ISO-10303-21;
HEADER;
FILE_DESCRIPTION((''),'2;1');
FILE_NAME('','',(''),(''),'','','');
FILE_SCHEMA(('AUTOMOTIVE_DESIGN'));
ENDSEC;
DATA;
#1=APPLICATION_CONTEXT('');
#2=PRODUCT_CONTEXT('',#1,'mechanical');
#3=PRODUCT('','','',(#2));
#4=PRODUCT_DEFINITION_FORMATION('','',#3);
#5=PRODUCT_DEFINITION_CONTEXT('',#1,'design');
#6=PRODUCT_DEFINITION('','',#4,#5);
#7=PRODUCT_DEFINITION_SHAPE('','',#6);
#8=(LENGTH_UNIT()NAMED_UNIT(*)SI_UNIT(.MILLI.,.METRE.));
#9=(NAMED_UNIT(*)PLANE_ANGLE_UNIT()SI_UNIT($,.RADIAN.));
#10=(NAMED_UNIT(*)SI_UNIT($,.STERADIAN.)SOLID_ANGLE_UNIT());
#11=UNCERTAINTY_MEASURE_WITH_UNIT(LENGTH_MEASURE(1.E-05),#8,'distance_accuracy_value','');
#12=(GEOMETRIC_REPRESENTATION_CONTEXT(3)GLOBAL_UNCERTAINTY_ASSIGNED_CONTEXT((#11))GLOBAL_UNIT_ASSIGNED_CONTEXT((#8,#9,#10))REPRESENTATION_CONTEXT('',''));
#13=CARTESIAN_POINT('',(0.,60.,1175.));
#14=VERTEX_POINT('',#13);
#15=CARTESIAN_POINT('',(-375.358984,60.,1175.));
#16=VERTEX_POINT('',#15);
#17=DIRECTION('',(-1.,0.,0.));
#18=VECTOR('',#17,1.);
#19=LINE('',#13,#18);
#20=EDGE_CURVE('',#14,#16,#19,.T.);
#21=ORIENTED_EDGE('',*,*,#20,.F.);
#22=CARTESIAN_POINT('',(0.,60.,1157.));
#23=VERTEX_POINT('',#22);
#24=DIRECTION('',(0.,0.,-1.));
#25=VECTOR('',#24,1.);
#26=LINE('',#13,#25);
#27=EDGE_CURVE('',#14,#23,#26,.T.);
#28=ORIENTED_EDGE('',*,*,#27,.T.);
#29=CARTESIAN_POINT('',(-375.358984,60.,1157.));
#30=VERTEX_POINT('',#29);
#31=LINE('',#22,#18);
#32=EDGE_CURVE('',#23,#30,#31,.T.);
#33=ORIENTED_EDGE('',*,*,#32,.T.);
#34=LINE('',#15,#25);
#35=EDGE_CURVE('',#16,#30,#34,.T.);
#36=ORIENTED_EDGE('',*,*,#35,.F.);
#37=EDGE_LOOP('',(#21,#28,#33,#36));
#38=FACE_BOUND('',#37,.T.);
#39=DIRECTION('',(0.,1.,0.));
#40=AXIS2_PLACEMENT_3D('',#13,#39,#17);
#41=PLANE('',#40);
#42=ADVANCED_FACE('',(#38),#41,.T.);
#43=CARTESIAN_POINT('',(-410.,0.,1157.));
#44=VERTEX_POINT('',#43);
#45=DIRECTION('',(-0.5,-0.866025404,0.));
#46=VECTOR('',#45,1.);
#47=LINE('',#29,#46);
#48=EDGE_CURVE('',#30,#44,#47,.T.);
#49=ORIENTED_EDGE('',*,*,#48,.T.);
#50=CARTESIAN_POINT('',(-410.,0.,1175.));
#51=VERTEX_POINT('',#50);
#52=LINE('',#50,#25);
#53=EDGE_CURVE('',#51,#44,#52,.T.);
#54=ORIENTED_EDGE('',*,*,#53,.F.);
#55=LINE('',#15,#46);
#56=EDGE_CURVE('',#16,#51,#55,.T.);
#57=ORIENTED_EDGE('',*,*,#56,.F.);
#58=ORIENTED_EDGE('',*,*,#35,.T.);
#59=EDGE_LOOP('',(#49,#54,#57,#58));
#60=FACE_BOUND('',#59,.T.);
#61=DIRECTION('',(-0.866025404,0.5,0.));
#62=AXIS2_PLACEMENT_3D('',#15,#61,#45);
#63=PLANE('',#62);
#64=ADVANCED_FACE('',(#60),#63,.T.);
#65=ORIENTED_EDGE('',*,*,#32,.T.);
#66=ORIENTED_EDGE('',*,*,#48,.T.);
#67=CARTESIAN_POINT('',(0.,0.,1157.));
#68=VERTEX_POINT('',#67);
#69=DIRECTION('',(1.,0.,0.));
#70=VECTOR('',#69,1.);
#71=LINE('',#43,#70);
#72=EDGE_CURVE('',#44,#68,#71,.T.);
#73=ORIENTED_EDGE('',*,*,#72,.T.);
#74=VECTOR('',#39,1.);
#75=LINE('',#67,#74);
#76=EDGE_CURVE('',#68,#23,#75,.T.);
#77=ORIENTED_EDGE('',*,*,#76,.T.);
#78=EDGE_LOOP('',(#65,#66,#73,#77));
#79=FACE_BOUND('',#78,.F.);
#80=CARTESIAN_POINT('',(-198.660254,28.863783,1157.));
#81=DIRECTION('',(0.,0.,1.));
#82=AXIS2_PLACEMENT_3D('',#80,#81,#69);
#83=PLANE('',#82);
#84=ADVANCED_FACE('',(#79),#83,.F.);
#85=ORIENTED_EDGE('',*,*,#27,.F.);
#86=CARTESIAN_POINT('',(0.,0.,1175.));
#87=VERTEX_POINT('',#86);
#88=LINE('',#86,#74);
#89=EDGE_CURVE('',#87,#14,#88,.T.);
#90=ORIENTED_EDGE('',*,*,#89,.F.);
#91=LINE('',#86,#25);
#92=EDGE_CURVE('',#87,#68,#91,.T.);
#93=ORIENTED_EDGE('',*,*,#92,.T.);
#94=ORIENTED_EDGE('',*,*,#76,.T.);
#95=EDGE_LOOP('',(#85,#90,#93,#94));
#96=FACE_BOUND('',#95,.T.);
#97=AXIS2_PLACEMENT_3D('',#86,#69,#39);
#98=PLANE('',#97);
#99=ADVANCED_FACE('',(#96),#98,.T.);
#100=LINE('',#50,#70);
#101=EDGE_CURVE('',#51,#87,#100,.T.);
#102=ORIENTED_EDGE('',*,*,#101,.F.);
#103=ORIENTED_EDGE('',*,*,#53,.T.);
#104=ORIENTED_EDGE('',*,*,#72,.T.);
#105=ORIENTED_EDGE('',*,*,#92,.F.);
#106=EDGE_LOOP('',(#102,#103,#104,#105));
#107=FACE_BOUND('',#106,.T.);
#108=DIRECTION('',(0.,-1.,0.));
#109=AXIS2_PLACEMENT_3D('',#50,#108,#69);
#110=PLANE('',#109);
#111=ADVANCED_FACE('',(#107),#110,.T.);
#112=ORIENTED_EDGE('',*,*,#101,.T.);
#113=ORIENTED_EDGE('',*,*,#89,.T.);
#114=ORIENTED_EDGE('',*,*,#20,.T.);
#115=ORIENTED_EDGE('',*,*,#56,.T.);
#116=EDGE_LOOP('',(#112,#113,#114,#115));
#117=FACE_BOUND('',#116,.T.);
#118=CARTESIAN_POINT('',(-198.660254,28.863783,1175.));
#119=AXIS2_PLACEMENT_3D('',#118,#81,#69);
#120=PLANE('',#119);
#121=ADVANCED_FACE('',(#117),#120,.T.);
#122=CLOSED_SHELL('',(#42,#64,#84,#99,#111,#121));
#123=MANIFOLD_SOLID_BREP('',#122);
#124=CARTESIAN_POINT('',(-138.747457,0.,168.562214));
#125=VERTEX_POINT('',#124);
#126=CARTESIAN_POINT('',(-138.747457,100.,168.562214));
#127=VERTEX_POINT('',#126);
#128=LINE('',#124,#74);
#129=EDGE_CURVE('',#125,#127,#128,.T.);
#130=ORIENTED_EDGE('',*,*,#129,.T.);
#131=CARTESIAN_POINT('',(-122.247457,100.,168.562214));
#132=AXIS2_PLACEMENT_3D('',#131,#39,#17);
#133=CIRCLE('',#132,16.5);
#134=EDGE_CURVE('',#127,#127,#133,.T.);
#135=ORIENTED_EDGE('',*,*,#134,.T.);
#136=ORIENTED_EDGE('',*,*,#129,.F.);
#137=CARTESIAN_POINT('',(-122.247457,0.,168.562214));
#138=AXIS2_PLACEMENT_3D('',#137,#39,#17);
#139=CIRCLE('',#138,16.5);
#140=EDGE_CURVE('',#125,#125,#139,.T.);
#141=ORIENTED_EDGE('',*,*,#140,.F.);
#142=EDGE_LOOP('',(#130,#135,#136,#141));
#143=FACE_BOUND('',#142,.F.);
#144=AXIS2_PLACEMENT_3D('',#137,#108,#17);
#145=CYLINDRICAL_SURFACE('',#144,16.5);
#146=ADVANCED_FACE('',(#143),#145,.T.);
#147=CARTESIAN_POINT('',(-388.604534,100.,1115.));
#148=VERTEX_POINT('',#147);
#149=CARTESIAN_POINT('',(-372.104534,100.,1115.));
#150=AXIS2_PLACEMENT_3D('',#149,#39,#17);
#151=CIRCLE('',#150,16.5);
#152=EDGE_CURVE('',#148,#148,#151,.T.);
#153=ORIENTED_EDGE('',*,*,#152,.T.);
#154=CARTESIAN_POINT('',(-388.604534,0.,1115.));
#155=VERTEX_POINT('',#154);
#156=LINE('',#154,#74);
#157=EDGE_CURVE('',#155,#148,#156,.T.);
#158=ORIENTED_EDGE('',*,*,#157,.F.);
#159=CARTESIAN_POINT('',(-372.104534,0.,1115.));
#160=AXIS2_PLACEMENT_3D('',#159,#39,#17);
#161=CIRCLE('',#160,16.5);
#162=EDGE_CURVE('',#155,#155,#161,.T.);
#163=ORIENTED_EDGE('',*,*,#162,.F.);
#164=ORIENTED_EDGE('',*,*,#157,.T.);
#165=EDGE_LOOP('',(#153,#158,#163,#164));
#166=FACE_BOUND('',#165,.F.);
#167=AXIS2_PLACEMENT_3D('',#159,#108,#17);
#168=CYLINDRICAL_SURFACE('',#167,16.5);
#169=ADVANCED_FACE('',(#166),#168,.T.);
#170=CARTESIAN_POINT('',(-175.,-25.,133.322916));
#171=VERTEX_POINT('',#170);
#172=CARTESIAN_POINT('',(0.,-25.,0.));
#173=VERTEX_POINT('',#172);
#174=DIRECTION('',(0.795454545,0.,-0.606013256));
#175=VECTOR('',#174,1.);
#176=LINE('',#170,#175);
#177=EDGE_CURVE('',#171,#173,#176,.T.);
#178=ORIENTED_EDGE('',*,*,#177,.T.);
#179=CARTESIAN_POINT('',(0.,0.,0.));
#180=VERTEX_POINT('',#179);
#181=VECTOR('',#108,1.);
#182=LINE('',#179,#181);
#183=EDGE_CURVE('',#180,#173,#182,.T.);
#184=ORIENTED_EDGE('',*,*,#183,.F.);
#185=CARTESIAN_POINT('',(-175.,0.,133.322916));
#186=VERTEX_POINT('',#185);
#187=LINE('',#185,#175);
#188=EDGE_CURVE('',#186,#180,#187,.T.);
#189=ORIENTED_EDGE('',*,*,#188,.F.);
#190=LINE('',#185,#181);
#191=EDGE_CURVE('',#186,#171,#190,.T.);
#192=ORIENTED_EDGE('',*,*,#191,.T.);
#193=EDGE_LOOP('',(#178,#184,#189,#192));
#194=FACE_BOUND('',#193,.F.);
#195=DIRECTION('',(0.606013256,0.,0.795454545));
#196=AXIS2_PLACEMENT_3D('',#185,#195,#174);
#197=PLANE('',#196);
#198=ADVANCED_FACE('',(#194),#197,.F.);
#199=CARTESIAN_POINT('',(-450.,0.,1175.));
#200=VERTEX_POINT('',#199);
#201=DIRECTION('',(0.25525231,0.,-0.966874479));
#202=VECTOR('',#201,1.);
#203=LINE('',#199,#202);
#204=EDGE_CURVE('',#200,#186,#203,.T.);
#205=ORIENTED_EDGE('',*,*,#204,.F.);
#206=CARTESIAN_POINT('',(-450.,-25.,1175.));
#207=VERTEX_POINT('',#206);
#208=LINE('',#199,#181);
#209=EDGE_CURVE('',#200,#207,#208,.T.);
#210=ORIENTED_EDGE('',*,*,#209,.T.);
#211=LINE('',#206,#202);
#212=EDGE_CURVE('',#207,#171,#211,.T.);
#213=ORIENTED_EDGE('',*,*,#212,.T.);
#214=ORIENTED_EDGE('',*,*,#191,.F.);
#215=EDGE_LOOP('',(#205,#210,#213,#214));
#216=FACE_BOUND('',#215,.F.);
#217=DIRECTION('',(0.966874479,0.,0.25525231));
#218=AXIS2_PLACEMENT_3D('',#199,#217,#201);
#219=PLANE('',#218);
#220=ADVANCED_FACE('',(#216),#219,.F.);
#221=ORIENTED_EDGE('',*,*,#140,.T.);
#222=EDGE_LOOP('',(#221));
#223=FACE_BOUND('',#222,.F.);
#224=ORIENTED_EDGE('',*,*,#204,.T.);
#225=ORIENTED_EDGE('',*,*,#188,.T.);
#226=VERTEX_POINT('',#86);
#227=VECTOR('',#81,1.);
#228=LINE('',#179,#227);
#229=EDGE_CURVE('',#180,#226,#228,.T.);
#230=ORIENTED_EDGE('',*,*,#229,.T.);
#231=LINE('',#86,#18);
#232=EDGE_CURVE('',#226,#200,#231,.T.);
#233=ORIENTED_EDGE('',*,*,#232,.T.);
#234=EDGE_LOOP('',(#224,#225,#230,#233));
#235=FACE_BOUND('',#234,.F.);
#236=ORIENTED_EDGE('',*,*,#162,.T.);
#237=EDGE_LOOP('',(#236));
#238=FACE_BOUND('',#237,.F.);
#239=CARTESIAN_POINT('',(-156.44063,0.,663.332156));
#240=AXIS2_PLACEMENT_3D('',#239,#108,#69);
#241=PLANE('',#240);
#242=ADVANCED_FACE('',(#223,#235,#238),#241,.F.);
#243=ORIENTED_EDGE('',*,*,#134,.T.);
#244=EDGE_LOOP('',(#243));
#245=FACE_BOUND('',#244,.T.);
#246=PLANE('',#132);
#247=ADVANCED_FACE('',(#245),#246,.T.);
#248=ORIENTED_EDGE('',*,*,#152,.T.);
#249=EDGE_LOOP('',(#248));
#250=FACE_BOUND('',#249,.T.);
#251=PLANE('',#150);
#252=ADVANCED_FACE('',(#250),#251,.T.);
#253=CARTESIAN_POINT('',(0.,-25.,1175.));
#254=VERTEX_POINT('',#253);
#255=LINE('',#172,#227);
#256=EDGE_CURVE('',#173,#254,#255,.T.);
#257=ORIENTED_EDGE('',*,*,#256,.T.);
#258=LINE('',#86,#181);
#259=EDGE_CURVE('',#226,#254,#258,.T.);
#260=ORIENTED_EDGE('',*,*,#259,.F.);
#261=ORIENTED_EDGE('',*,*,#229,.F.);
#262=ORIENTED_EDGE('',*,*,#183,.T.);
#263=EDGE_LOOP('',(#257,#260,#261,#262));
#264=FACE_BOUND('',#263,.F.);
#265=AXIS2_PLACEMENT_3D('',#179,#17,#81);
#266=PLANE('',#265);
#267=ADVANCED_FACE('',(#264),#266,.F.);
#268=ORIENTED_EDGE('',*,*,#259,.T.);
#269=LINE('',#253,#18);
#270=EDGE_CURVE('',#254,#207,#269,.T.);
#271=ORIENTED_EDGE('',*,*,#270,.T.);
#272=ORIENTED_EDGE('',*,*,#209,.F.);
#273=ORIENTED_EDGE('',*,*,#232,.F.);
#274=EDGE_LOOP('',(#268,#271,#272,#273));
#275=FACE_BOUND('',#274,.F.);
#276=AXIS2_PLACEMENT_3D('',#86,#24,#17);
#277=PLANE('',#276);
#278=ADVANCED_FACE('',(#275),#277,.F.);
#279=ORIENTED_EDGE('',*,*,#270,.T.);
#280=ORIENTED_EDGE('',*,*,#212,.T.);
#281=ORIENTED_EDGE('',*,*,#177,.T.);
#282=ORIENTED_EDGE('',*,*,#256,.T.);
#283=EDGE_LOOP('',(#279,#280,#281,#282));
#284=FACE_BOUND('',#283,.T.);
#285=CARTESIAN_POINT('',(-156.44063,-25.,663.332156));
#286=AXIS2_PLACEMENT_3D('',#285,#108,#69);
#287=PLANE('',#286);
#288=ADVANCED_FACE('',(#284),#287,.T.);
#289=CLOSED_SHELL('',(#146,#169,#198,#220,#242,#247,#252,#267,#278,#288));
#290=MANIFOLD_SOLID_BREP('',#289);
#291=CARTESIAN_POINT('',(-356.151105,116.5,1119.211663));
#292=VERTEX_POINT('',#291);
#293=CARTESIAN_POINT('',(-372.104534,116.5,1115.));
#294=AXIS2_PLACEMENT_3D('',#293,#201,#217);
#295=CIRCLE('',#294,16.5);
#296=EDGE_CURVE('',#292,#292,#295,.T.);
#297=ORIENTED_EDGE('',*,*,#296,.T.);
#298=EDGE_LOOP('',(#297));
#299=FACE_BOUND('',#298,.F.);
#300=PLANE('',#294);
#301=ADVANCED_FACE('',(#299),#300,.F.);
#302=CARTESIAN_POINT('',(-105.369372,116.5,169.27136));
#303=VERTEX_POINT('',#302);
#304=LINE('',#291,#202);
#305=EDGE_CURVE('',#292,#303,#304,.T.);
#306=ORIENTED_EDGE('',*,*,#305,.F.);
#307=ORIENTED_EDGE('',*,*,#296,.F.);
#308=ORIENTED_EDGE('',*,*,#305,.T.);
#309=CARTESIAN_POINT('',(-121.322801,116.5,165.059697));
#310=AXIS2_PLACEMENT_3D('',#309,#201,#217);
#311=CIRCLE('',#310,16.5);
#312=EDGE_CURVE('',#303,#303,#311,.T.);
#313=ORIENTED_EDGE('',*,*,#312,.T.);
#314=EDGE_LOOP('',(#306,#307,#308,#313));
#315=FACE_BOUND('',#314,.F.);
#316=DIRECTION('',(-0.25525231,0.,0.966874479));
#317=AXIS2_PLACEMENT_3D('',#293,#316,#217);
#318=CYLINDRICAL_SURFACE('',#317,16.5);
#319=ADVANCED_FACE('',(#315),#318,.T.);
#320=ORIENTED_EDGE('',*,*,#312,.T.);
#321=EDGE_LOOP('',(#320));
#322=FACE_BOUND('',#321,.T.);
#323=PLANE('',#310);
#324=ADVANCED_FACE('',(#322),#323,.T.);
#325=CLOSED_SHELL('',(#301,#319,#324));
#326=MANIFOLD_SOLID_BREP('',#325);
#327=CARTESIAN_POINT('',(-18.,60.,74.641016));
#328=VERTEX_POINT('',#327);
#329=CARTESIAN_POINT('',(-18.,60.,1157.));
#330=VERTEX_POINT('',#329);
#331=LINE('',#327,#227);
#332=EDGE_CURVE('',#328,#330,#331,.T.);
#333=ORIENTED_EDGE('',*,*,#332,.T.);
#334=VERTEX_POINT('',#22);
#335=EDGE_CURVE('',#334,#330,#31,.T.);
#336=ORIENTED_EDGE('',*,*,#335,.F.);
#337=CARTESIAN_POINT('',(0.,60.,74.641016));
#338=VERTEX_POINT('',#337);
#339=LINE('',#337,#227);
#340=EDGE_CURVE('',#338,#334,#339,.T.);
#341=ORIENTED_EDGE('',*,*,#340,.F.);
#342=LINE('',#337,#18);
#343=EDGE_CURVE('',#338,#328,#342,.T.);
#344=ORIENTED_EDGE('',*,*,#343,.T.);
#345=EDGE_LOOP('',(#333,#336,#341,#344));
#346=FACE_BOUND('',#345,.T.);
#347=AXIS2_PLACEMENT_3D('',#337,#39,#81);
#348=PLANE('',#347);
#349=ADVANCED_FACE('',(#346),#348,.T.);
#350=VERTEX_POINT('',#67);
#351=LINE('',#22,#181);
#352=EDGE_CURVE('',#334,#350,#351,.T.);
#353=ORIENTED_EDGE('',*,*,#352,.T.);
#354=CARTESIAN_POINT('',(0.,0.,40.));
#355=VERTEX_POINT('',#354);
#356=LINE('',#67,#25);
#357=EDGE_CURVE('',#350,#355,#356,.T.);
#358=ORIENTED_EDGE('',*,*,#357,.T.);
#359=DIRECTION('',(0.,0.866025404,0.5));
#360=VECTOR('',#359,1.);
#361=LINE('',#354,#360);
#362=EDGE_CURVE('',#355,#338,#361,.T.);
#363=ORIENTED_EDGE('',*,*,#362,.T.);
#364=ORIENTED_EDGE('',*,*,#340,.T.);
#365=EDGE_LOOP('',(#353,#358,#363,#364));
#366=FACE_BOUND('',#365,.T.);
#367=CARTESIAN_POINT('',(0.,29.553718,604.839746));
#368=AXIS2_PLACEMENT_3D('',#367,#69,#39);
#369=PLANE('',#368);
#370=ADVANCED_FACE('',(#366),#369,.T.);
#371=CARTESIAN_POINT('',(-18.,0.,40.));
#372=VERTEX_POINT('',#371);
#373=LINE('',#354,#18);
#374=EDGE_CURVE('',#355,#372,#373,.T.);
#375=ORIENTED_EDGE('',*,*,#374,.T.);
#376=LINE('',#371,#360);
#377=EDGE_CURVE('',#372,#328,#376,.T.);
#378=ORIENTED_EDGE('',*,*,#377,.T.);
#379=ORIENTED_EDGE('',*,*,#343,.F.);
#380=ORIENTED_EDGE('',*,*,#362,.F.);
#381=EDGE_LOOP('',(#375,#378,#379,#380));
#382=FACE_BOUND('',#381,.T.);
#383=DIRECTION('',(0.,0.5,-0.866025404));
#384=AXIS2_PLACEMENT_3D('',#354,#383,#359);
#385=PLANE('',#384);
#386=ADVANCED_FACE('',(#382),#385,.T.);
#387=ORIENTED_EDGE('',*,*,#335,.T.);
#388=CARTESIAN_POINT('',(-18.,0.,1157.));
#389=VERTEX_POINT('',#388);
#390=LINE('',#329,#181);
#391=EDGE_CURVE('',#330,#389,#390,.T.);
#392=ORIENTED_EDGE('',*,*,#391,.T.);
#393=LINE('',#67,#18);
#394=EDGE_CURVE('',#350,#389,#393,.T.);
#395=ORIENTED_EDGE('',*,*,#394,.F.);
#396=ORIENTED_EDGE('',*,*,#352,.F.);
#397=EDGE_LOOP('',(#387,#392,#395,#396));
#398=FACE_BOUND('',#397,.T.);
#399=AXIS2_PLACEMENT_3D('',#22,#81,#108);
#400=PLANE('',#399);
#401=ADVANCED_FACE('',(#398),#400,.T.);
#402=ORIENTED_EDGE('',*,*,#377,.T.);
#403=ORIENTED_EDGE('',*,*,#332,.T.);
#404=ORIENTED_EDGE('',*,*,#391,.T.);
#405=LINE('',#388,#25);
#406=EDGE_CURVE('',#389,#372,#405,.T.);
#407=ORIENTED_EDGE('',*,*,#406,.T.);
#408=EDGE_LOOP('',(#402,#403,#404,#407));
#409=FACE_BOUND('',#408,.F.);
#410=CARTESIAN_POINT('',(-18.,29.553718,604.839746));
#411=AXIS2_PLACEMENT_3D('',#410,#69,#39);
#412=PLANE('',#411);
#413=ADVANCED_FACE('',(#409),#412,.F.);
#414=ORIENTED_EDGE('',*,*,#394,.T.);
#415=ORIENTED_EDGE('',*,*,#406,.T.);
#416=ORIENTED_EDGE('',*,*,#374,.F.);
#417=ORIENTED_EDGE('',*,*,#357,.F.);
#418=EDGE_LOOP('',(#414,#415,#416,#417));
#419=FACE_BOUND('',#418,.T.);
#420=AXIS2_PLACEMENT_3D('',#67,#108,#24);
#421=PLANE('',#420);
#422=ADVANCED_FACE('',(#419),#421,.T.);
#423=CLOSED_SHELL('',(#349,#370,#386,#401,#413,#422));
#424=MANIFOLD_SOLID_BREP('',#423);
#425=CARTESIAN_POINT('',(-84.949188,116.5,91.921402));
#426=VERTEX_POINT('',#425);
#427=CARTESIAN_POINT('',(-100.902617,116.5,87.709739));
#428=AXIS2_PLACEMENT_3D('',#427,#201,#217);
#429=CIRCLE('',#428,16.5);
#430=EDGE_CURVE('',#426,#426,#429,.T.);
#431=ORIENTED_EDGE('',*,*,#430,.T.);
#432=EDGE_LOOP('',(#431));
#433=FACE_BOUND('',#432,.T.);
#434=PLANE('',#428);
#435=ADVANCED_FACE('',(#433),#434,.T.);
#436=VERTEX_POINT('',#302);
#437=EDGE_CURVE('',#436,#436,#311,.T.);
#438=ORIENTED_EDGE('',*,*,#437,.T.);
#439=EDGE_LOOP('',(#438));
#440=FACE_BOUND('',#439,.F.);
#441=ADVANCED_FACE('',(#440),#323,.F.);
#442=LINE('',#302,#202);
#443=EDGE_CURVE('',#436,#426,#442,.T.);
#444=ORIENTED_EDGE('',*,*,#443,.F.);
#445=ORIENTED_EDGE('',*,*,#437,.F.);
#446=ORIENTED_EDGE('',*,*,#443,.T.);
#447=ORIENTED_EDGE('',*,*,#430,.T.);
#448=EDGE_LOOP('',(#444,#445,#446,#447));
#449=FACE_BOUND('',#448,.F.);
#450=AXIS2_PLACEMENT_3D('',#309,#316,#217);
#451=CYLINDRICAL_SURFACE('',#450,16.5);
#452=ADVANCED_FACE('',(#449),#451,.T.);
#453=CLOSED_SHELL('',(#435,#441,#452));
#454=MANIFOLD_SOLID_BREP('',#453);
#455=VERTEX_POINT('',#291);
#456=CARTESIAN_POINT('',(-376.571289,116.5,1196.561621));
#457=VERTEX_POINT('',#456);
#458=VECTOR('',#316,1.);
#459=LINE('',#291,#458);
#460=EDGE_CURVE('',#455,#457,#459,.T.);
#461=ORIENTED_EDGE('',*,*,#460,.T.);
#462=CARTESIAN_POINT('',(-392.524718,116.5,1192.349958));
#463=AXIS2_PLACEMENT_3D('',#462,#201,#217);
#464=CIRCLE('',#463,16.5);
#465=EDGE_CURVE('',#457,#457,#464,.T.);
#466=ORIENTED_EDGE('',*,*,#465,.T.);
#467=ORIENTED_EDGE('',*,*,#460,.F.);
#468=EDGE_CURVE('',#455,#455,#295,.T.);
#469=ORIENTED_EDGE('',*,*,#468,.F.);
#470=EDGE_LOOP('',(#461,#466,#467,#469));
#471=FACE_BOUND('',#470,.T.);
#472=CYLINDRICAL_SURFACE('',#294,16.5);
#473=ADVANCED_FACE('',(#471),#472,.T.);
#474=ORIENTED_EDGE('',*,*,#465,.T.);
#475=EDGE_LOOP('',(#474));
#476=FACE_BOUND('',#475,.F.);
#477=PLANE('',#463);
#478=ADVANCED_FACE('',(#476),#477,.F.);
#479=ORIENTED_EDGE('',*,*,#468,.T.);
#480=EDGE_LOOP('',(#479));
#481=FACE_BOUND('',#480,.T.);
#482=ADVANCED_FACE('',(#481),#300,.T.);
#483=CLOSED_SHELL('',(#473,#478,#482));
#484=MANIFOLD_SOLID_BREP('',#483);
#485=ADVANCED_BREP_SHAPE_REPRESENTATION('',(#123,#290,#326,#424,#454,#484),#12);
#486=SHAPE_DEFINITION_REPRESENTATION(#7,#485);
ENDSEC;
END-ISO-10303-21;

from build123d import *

# Parameters (mm, degrees)
F1_DEPTH  = 25
F2_R      = 16.5
F3_DEPTH  = 100
F6_R      = 16.5
F7_DEPTH  = 982.4856519699
F8_DEPTH  = 80
F9_DEPTH  = 80
F11_DEPTH = 18
F13_DEPTH = 18


with BuildPart() as f1:
    # F0 (on Front) → F1 (new body)
    with BuildSketch(Plane.XZ):
        Polygon((-175, 133.3229162597), (0, 0), (0, 1175), (-450, 1175), align=None)
    extrude(amount=F1_DEPTH)

    # F2 (on face) → F3 (join)
    with BuildSketch(Plane(origin=(0, 0, 0), x_dir=(-1, 0, 0), z_dir=(0, 1, 0))):
        with Locations((372.1045335043, 1115)):
            Circle(F2_R)
        with Locations((122.2474566279, 168.5622138455)):
            Circle(F2_R)
    extrude(amount=F3_DEPTH)


with BuildPart() as f7:
    # F6 (on line) → F7 (new body)
    with BuildSketch(Plane(origin=(-299.4225953601, 0, 1134.1878397842), x_dir=(0.9668744791, 0, 0.2552523099), z_dir=(0.2552523099, 0, -0.9668744791))):
        with Locations((-75.1720515084, -116.5)):
            Circle(F6_R)
    extrude(amount=F7_DEPTH)


with BuildPart() as f8:
    # F8 (new): a face of the model
    f8_faces = [f7.part.faces().sort_by_distance(p)[0] for p in [
        (-372.1045335043, 116.5, 1115),
    ]]
    extrude(f8_faces, amount=F8_DEPTH)


with BuildPart() as f9:
    # F9 (new): a face of the model
    f9_faces = [f7.part.faces().sort_by_distance(p)[0] for p in [
        (-121.322801438, 116.5, 165.0596970396),
    ]]
    extrude(f9_faces, amount=F9_DEPTH)


with BuildPart() as f11:
    # F10 (on face) → F11 (new body)
    with BuildSketch(Plane.XY.offset(1175)):
        Polygon((-410, 0), (0, 0), (0, 60), (-375.3589838486, 60), align=None)
    extrude(amount=-F11_DEPTH)


with BuildPart() as f13:
    # F12 (on face) → F13 (new body)
    with BuildSketch(Plane.YZ):
        Polygon((60, 1157), (0, 1157), (0, 40), (60, 74.6410161514), align=None)
    extrude(amount=-F13_DEPTH)


solid = Compound([f1.part, f7.part, f8.part, f9.part, f11.part, f13.part])
